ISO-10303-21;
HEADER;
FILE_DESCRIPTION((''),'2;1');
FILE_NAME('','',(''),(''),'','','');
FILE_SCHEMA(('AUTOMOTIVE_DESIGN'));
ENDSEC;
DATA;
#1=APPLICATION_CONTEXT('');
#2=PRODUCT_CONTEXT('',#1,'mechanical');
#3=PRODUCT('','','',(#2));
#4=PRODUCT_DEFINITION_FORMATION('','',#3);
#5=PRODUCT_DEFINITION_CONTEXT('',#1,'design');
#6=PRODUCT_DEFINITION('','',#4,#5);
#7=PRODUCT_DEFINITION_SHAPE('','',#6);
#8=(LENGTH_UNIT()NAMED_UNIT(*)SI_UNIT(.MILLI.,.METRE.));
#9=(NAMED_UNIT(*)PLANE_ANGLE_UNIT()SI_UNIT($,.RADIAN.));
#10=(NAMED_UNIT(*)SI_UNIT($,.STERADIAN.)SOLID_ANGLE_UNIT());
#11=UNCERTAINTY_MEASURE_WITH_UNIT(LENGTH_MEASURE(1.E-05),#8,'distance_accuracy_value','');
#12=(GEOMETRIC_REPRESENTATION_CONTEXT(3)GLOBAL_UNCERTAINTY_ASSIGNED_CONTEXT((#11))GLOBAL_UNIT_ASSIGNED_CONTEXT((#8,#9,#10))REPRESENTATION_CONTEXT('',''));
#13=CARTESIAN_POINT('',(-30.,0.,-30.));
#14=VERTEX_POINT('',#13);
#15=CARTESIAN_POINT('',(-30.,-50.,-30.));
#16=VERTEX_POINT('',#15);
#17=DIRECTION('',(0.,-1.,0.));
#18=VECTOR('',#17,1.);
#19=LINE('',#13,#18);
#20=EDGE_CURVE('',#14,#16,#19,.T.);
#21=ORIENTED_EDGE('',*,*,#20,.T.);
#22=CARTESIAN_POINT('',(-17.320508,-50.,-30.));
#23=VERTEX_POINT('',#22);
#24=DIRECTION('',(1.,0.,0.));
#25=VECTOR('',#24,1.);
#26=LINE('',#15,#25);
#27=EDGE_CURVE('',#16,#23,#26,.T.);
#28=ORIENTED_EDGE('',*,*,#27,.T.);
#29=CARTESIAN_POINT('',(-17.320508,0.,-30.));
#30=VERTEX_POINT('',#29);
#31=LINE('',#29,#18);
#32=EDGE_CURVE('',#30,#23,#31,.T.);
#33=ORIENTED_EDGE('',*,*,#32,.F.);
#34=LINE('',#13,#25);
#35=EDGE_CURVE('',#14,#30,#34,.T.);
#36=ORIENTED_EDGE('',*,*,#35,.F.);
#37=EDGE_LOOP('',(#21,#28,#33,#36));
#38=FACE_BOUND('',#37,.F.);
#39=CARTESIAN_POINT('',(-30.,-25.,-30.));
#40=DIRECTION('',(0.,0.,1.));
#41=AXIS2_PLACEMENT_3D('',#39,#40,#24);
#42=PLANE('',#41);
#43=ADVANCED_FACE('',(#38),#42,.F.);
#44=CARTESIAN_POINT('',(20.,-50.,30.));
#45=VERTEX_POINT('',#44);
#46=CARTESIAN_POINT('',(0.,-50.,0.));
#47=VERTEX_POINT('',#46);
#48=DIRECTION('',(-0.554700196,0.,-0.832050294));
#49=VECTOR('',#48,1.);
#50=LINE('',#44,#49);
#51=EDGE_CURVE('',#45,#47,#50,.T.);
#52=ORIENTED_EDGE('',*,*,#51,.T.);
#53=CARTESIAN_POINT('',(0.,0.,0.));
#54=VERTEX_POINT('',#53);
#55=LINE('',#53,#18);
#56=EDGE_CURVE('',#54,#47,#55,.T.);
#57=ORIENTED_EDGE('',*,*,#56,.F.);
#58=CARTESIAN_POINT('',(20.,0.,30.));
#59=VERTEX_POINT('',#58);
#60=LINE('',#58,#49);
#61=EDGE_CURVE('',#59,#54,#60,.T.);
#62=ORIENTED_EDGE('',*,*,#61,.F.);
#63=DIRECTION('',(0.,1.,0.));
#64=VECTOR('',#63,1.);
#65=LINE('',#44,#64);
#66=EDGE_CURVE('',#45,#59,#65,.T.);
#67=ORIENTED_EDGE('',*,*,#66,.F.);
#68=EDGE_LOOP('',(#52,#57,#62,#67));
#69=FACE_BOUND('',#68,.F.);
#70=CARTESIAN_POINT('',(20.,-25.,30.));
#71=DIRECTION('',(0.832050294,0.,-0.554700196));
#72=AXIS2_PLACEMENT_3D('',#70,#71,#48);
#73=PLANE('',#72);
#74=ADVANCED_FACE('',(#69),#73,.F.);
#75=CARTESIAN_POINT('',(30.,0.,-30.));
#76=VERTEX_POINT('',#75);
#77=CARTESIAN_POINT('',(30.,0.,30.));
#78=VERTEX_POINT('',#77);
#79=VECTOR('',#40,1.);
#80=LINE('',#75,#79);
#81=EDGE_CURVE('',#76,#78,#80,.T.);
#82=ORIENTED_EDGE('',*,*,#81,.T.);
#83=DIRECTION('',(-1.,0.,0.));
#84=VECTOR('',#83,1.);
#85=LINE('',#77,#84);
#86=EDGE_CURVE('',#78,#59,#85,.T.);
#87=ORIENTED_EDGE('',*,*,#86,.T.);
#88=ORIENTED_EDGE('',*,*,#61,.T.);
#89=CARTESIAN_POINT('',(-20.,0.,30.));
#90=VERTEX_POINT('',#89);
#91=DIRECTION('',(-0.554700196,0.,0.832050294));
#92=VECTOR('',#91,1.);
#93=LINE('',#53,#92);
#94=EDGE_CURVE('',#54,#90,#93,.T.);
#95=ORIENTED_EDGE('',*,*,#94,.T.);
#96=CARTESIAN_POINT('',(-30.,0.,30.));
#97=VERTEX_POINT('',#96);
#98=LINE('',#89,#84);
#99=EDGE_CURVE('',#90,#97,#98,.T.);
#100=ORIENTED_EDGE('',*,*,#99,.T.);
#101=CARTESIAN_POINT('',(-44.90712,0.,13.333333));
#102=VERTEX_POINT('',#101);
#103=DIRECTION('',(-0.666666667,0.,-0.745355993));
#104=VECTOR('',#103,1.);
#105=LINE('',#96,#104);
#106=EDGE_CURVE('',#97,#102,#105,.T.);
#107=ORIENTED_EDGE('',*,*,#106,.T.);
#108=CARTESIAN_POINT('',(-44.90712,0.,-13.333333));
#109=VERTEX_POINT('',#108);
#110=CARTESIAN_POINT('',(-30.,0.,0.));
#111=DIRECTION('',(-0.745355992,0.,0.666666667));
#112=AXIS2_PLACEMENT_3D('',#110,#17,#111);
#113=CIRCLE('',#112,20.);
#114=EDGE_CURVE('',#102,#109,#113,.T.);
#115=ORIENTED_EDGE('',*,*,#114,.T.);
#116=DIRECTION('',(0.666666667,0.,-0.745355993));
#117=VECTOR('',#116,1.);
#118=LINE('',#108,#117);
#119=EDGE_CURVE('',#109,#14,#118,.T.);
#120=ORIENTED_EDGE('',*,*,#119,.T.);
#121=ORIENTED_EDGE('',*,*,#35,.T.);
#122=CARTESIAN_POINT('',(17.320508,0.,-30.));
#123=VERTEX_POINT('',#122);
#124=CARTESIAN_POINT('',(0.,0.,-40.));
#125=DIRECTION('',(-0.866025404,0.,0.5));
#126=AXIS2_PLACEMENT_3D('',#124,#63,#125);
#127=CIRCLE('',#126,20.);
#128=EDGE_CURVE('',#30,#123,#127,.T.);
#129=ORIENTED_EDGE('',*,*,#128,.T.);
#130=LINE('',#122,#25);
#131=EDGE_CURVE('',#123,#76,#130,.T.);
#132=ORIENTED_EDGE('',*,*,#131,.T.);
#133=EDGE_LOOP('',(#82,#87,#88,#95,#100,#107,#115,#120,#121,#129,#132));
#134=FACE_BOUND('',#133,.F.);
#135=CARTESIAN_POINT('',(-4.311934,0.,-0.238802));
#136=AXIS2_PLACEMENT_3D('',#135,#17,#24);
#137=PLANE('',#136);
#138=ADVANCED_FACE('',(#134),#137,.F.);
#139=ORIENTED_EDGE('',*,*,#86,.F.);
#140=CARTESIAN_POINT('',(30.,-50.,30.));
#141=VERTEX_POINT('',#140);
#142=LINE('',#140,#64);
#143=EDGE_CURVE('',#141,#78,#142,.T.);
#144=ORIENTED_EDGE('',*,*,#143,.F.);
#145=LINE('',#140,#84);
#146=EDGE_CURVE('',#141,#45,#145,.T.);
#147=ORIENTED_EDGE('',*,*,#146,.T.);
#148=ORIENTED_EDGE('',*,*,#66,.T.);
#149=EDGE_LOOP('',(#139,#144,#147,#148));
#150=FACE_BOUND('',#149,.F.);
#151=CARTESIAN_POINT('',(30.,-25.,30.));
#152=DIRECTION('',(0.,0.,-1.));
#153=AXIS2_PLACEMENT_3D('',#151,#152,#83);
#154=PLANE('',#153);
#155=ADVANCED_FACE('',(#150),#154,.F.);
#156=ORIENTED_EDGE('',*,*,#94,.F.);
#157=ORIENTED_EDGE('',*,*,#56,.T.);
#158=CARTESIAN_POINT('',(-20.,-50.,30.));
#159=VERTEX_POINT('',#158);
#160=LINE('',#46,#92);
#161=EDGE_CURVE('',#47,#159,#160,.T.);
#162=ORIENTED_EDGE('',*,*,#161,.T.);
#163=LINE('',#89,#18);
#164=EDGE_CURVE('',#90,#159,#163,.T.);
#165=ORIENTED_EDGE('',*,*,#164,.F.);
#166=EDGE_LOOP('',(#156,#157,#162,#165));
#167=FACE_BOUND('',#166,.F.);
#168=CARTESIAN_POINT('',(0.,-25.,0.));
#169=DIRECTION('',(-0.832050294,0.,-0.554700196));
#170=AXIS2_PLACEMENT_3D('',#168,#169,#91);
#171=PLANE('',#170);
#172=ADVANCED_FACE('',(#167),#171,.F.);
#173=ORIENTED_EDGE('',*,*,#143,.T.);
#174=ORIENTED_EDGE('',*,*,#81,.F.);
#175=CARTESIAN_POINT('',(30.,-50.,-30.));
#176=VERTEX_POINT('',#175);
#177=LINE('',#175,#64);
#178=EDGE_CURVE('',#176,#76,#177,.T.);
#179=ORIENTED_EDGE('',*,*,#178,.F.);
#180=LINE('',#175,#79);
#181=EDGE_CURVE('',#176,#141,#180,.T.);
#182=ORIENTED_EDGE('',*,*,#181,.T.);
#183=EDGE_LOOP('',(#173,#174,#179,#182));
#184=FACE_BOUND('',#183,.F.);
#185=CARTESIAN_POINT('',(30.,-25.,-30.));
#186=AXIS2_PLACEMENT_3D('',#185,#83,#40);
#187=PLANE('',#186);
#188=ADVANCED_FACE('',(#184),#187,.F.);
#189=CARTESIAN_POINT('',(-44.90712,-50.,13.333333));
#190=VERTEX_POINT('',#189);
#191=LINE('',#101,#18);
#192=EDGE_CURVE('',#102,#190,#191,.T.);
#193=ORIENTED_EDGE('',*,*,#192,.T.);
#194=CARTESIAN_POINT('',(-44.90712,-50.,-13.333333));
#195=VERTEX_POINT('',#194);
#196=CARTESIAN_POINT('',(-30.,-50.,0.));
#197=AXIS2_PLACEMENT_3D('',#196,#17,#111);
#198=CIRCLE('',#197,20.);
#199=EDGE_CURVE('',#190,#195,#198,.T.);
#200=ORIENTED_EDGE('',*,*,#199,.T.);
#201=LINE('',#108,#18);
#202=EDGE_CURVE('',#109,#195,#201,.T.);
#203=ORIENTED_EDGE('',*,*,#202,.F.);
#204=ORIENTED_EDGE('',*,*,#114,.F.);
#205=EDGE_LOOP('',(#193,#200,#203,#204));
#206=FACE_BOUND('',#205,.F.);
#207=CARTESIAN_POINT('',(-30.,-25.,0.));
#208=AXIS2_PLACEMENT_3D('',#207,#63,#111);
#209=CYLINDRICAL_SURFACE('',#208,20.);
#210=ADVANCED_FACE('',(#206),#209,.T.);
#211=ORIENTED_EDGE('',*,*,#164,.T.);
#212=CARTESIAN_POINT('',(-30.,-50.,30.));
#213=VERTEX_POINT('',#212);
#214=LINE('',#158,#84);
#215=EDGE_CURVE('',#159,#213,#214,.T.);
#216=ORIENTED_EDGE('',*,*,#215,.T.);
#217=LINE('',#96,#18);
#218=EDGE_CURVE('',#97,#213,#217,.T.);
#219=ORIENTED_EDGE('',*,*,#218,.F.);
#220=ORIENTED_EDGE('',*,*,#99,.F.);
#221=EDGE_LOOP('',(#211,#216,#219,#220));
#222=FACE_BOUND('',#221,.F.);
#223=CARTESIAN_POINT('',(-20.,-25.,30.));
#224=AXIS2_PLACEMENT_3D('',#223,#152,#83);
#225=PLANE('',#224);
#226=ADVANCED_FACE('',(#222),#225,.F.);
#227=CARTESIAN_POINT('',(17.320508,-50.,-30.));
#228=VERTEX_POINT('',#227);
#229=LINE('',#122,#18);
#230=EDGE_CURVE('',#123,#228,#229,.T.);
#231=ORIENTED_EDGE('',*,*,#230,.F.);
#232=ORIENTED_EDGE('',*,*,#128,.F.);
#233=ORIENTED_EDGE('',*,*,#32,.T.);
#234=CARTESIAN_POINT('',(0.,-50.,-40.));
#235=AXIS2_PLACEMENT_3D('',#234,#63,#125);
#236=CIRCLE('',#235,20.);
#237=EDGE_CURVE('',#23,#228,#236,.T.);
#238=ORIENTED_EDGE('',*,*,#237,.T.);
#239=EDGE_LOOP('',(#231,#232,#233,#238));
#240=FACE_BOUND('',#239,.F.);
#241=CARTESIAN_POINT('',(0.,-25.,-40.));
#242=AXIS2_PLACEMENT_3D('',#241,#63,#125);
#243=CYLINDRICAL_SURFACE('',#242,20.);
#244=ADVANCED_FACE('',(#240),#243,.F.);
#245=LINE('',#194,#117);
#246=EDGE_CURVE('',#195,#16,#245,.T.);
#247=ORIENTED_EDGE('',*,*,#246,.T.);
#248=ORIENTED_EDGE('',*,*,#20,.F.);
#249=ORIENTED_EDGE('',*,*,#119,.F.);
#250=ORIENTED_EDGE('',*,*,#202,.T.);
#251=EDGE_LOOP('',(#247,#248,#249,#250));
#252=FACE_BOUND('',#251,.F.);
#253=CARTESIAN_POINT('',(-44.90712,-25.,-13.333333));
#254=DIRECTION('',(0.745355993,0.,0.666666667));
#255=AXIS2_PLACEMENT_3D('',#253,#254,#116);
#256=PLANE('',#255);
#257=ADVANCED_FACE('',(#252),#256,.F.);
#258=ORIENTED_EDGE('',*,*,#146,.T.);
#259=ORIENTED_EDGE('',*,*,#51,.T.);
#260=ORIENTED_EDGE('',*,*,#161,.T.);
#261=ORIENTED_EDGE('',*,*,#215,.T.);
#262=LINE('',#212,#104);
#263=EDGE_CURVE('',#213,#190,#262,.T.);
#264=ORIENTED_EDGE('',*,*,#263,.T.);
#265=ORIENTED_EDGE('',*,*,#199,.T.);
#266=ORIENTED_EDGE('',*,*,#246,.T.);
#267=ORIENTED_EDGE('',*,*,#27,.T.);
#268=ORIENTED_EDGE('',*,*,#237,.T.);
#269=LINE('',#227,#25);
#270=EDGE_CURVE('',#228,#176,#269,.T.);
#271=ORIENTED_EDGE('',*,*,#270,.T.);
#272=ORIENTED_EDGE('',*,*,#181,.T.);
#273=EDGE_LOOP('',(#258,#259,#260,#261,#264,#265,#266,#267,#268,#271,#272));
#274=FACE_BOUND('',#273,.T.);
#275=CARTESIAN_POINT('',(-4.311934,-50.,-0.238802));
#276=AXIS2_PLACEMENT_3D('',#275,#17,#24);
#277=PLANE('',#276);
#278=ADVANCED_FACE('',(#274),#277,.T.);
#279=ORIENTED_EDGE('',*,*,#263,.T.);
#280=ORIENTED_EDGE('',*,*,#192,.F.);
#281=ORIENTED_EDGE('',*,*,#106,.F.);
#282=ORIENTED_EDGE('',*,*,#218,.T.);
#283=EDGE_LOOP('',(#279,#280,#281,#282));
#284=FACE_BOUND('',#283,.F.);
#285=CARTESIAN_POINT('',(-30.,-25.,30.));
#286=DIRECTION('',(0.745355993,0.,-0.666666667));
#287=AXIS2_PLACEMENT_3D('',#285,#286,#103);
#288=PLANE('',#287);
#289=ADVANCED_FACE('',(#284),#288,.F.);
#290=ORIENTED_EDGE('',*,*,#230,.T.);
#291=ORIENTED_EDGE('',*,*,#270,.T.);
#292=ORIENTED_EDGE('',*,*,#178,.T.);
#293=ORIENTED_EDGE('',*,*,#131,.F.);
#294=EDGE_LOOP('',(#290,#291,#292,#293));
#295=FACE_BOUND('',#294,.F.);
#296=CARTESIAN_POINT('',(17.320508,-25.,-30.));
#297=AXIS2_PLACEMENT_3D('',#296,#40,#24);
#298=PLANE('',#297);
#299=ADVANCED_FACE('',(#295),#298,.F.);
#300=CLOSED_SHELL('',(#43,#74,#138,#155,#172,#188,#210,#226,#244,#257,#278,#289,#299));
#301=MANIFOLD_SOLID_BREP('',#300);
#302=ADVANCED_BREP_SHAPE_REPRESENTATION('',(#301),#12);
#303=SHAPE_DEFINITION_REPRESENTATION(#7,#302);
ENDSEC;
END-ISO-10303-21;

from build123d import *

# Parameters (mm, degrees)
F1_DEPTH = 25
F2_DEPTH = 25


# Not quite as in the source:
# - a feature of the source that left no trace in its solid (it failed there, or was rolled back) is left out


with BuildPart() as f1:
    # F0 (on Front) → F1 (new body)
    with BuildSketch(Plane.XZ):
        with BuildLine():
            Line((20, 30), (0, 0))
            Line((0, 0), (-20, 30))
            Line((-20, 30), (-30, 30))
            Line((-30, 30), (-44.90711985, 13.3333333333))
            ThreePointArc((-44.90711985, 13.3333333333), (-50, 0), (-44.90711985, -13.3333333333))
            Line((-44.90711985, -13.3333333333), (-30, -30))
            Line((-30, -30), (-17.3205080757, -30))
            ThreePointArc((-17.3205080757, -30), (0, -20), (17.3205080757, -30))
            Line((17.3205080757, -30), (30, -30))
            Line((30, -30), (30, 30))
            Line((30, 30), (20, 30))
        make_face()
    extrude(amount=F1_DEPTH)

    # F2 (add): a face of the model
    f2_faces = [f1.faces().sort_by_distance(p)[0] for p in [
        (-8.0009938, -25, -1.613641283),
    ]]
    extrude(f2_faces, amount=F2_DEPTH)


solid = f1.part
